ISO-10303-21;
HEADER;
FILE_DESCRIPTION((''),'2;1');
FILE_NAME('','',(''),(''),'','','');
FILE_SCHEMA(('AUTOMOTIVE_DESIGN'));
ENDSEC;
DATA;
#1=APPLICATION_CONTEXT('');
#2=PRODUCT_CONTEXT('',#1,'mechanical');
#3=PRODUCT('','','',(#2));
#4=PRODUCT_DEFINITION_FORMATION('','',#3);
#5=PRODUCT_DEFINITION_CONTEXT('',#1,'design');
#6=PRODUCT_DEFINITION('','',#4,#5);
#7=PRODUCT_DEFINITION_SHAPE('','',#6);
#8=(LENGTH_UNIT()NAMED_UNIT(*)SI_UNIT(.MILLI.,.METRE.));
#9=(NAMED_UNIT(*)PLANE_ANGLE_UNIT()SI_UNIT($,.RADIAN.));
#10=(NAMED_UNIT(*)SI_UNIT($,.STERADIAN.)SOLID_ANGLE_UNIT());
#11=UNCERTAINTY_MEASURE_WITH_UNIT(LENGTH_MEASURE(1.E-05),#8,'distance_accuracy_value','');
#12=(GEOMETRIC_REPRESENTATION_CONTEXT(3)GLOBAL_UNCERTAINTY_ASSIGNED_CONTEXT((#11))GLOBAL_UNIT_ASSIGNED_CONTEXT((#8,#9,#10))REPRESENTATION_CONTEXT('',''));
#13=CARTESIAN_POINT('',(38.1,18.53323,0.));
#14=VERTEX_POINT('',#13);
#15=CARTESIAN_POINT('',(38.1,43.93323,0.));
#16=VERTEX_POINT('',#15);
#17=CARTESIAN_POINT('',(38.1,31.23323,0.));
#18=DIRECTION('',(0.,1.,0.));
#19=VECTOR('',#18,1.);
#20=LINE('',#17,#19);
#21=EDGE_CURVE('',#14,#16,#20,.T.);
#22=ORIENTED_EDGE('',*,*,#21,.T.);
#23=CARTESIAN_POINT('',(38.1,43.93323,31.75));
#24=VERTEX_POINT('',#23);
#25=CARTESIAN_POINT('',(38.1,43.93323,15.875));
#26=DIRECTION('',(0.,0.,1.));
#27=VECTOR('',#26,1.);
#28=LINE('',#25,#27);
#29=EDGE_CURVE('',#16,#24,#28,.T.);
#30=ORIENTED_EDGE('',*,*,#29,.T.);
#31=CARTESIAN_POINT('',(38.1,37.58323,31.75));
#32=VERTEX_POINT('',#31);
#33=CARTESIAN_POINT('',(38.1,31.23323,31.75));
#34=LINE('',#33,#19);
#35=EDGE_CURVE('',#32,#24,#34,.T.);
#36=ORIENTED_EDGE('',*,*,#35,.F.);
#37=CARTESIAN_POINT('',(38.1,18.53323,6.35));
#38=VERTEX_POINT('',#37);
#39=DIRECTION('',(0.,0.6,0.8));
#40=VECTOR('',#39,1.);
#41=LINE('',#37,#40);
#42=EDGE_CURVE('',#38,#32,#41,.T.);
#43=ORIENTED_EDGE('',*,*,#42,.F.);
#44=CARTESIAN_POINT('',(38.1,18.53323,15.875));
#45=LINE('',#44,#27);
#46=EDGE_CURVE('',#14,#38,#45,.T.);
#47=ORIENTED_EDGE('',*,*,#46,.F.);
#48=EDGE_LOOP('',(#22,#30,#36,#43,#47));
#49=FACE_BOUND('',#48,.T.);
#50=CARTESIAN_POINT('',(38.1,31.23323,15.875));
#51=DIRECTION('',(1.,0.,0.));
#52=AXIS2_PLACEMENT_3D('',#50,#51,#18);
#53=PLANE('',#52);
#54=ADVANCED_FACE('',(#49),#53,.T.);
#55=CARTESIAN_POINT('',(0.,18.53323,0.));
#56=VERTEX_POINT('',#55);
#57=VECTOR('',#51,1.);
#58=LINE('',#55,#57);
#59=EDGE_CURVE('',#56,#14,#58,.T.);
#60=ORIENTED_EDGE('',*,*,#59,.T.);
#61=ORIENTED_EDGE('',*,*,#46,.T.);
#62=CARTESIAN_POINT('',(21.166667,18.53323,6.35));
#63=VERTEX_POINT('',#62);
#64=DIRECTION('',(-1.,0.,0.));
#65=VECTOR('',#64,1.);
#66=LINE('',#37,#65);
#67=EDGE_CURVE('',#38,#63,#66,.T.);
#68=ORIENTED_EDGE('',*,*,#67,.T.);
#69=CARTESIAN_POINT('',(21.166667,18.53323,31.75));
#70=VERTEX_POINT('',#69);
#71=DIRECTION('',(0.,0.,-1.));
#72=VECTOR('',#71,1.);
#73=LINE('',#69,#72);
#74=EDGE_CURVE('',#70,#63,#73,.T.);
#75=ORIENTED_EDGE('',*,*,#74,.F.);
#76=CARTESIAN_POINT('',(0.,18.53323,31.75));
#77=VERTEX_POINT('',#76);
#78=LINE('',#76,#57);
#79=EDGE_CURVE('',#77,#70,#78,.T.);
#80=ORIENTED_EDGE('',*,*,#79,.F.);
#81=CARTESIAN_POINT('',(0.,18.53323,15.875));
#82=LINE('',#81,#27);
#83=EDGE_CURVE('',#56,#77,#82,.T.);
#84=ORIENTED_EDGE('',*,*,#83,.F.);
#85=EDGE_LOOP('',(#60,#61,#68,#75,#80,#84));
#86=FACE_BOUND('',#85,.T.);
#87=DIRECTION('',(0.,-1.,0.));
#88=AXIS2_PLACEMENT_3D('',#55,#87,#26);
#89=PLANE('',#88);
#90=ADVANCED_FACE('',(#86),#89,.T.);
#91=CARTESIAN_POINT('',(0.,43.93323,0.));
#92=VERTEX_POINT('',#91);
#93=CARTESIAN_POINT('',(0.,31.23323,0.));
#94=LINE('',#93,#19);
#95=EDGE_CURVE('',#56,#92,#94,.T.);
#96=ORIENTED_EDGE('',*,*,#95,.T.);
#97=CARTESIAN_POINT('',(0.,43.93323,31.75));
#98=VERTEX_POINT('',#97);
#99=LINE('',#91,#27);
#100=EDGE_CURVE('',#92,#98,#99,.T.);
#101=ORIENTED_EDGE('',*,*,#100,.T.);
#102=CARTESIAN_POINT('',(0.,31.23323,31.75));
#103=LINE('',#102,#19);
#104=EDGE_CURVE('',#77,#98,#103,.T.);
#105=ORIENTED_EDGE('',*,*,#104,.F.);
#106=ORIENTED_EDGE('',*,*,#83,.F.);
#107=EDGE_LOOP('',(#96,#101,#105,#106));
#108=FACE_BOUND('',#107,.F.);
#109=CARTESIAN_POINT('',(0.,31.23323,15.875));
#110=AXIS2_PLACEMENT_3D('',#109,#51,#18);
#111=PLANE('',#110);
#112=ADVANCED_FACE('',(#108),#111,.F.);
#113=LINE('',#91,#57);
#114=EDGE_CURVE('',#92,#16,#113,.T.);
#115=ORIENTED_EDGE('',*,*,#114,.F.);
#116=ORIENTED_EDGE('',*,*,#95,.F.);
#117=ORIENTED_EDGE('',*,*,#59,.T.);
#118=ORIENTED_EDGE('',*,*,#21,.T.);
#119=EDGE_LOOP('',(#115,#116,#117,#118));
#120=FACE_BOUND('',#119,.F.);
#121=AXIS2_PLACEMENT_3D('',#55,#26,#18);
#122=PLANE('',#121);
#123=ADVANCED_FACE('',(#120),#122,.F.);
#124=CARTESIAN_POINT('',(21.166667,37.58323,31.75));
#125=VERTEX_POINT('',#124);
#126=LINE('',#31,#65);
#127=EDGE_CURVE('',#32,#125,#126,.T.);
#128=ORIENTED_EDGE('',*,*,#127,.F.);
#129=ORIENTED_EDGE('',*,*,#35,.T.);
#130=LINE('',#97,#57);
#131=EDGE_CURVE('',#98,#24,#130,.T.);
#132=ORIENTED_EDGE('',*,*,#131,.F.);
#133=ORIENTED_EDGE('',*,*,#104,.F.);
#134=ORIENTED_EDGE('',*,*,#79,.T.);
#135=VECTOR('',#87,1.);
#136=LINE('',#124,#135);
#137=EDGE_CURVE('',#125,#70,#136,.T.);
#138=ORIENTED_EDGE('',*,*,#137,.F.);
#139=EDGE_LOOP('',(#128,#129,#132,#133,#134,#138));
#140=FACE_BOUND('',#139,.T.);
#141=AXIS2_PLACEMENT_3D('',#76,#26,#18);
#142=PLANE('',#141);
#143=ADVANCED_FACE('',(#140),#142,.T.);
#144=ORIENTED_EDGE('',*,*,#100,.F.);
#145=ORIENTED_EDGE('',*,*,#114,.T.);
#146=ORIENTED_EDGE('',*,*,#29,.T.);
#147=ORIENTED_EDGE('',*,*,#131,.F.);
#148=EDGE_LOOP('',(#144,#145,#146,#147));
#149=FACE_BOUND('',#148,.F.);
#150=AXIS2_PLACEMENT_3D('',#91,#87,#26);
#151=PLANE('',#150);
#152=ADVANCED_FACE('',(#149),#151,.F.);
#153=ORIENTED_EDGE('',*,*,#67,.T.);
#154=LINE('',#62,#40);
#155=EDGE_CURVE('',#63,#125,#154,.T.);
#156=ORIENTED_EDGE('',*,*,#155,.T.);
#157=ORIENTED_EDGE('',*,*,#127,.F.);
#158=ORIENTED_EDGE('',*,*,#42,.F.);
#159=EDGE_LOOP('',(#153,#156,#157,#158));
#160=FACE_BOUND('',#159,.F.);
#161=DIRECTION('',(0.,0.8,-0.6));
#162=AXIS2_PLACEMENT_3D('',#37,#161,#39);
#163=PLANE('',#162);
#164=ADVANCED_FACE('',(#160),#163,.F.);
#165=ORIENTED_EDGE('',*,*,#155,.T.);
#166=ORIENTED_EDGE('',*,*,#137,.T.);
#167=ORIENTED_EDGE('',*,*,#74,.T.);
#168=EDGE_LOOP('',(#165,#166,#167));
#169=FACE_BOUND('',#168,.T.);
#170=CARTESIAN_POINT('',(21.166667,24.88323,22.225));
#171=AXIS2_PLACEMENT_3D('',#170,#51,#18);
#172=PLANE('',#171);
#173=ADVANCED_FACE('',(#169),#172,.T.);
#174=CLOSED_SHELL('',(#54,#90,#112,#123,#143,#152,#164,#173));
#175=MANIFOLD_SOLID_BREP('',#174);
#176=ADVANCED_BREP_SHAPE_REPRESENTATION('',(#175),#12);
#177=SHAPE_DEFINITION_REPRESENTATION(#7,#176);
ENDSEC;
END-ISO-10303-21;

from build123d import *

# Parameters (mm, degrees)
F0_W     = 25.4
F0_H     = 31.75
F1_DEPTH = 38.1
F3_DEPTH = 25.4
F4_DEPTH = 25.4
F6_DEPTH = 16.9333333333


# Not quite as in the source:
# - a length typed as a fraction of an inch, garbled in the dataset ("3 / 203.2 mm" for 3/8 in), is restored


with BuildPart() as f1:
    # F0 (on Right) → F1 (new body)
    with BuildSketch(Plane.YZ):
        with Locations((31.233229906, 15.875)):
            Rectangle(F0_W, F0_H)
    extrude(amount=F1_DEPTH)

    # F2 (on Right) → F3 (cut)
    with BuildSketch(Plane.YZ):
        Polygon((43.7832586467, 31.5612442791), (24.7332586467, 31.5612442791), (44.0856164074, 6.1630439534), align=None)
    extrude(amount=-F3_DEPTH, mode=Mode.SUBTRACT)

    # F2 (on Right) → F4 (cut)
    with BuildSketch(Plane.YZ):
        Polygon((43.7832586467, 31.5612442791), (24.7332586467, 31.5612442791), (44.0856164074, 6.1630439534), align=None)
    extrude(amount=-F4_DEPTH, mode=Mode.SUBTRACT)

    # F5 (on face) → F6 (cut)
    with BuildSketch(Plane.YZ.offset(38.1)):
        Polygon((18.533229906, 6.35), (37.583229906, 31.75), (18.533229906, 31.75), align=None)
    extrude(amount=-F6_DEPTH, mode=Mode.SUBTRACT)


solid = f1.part
